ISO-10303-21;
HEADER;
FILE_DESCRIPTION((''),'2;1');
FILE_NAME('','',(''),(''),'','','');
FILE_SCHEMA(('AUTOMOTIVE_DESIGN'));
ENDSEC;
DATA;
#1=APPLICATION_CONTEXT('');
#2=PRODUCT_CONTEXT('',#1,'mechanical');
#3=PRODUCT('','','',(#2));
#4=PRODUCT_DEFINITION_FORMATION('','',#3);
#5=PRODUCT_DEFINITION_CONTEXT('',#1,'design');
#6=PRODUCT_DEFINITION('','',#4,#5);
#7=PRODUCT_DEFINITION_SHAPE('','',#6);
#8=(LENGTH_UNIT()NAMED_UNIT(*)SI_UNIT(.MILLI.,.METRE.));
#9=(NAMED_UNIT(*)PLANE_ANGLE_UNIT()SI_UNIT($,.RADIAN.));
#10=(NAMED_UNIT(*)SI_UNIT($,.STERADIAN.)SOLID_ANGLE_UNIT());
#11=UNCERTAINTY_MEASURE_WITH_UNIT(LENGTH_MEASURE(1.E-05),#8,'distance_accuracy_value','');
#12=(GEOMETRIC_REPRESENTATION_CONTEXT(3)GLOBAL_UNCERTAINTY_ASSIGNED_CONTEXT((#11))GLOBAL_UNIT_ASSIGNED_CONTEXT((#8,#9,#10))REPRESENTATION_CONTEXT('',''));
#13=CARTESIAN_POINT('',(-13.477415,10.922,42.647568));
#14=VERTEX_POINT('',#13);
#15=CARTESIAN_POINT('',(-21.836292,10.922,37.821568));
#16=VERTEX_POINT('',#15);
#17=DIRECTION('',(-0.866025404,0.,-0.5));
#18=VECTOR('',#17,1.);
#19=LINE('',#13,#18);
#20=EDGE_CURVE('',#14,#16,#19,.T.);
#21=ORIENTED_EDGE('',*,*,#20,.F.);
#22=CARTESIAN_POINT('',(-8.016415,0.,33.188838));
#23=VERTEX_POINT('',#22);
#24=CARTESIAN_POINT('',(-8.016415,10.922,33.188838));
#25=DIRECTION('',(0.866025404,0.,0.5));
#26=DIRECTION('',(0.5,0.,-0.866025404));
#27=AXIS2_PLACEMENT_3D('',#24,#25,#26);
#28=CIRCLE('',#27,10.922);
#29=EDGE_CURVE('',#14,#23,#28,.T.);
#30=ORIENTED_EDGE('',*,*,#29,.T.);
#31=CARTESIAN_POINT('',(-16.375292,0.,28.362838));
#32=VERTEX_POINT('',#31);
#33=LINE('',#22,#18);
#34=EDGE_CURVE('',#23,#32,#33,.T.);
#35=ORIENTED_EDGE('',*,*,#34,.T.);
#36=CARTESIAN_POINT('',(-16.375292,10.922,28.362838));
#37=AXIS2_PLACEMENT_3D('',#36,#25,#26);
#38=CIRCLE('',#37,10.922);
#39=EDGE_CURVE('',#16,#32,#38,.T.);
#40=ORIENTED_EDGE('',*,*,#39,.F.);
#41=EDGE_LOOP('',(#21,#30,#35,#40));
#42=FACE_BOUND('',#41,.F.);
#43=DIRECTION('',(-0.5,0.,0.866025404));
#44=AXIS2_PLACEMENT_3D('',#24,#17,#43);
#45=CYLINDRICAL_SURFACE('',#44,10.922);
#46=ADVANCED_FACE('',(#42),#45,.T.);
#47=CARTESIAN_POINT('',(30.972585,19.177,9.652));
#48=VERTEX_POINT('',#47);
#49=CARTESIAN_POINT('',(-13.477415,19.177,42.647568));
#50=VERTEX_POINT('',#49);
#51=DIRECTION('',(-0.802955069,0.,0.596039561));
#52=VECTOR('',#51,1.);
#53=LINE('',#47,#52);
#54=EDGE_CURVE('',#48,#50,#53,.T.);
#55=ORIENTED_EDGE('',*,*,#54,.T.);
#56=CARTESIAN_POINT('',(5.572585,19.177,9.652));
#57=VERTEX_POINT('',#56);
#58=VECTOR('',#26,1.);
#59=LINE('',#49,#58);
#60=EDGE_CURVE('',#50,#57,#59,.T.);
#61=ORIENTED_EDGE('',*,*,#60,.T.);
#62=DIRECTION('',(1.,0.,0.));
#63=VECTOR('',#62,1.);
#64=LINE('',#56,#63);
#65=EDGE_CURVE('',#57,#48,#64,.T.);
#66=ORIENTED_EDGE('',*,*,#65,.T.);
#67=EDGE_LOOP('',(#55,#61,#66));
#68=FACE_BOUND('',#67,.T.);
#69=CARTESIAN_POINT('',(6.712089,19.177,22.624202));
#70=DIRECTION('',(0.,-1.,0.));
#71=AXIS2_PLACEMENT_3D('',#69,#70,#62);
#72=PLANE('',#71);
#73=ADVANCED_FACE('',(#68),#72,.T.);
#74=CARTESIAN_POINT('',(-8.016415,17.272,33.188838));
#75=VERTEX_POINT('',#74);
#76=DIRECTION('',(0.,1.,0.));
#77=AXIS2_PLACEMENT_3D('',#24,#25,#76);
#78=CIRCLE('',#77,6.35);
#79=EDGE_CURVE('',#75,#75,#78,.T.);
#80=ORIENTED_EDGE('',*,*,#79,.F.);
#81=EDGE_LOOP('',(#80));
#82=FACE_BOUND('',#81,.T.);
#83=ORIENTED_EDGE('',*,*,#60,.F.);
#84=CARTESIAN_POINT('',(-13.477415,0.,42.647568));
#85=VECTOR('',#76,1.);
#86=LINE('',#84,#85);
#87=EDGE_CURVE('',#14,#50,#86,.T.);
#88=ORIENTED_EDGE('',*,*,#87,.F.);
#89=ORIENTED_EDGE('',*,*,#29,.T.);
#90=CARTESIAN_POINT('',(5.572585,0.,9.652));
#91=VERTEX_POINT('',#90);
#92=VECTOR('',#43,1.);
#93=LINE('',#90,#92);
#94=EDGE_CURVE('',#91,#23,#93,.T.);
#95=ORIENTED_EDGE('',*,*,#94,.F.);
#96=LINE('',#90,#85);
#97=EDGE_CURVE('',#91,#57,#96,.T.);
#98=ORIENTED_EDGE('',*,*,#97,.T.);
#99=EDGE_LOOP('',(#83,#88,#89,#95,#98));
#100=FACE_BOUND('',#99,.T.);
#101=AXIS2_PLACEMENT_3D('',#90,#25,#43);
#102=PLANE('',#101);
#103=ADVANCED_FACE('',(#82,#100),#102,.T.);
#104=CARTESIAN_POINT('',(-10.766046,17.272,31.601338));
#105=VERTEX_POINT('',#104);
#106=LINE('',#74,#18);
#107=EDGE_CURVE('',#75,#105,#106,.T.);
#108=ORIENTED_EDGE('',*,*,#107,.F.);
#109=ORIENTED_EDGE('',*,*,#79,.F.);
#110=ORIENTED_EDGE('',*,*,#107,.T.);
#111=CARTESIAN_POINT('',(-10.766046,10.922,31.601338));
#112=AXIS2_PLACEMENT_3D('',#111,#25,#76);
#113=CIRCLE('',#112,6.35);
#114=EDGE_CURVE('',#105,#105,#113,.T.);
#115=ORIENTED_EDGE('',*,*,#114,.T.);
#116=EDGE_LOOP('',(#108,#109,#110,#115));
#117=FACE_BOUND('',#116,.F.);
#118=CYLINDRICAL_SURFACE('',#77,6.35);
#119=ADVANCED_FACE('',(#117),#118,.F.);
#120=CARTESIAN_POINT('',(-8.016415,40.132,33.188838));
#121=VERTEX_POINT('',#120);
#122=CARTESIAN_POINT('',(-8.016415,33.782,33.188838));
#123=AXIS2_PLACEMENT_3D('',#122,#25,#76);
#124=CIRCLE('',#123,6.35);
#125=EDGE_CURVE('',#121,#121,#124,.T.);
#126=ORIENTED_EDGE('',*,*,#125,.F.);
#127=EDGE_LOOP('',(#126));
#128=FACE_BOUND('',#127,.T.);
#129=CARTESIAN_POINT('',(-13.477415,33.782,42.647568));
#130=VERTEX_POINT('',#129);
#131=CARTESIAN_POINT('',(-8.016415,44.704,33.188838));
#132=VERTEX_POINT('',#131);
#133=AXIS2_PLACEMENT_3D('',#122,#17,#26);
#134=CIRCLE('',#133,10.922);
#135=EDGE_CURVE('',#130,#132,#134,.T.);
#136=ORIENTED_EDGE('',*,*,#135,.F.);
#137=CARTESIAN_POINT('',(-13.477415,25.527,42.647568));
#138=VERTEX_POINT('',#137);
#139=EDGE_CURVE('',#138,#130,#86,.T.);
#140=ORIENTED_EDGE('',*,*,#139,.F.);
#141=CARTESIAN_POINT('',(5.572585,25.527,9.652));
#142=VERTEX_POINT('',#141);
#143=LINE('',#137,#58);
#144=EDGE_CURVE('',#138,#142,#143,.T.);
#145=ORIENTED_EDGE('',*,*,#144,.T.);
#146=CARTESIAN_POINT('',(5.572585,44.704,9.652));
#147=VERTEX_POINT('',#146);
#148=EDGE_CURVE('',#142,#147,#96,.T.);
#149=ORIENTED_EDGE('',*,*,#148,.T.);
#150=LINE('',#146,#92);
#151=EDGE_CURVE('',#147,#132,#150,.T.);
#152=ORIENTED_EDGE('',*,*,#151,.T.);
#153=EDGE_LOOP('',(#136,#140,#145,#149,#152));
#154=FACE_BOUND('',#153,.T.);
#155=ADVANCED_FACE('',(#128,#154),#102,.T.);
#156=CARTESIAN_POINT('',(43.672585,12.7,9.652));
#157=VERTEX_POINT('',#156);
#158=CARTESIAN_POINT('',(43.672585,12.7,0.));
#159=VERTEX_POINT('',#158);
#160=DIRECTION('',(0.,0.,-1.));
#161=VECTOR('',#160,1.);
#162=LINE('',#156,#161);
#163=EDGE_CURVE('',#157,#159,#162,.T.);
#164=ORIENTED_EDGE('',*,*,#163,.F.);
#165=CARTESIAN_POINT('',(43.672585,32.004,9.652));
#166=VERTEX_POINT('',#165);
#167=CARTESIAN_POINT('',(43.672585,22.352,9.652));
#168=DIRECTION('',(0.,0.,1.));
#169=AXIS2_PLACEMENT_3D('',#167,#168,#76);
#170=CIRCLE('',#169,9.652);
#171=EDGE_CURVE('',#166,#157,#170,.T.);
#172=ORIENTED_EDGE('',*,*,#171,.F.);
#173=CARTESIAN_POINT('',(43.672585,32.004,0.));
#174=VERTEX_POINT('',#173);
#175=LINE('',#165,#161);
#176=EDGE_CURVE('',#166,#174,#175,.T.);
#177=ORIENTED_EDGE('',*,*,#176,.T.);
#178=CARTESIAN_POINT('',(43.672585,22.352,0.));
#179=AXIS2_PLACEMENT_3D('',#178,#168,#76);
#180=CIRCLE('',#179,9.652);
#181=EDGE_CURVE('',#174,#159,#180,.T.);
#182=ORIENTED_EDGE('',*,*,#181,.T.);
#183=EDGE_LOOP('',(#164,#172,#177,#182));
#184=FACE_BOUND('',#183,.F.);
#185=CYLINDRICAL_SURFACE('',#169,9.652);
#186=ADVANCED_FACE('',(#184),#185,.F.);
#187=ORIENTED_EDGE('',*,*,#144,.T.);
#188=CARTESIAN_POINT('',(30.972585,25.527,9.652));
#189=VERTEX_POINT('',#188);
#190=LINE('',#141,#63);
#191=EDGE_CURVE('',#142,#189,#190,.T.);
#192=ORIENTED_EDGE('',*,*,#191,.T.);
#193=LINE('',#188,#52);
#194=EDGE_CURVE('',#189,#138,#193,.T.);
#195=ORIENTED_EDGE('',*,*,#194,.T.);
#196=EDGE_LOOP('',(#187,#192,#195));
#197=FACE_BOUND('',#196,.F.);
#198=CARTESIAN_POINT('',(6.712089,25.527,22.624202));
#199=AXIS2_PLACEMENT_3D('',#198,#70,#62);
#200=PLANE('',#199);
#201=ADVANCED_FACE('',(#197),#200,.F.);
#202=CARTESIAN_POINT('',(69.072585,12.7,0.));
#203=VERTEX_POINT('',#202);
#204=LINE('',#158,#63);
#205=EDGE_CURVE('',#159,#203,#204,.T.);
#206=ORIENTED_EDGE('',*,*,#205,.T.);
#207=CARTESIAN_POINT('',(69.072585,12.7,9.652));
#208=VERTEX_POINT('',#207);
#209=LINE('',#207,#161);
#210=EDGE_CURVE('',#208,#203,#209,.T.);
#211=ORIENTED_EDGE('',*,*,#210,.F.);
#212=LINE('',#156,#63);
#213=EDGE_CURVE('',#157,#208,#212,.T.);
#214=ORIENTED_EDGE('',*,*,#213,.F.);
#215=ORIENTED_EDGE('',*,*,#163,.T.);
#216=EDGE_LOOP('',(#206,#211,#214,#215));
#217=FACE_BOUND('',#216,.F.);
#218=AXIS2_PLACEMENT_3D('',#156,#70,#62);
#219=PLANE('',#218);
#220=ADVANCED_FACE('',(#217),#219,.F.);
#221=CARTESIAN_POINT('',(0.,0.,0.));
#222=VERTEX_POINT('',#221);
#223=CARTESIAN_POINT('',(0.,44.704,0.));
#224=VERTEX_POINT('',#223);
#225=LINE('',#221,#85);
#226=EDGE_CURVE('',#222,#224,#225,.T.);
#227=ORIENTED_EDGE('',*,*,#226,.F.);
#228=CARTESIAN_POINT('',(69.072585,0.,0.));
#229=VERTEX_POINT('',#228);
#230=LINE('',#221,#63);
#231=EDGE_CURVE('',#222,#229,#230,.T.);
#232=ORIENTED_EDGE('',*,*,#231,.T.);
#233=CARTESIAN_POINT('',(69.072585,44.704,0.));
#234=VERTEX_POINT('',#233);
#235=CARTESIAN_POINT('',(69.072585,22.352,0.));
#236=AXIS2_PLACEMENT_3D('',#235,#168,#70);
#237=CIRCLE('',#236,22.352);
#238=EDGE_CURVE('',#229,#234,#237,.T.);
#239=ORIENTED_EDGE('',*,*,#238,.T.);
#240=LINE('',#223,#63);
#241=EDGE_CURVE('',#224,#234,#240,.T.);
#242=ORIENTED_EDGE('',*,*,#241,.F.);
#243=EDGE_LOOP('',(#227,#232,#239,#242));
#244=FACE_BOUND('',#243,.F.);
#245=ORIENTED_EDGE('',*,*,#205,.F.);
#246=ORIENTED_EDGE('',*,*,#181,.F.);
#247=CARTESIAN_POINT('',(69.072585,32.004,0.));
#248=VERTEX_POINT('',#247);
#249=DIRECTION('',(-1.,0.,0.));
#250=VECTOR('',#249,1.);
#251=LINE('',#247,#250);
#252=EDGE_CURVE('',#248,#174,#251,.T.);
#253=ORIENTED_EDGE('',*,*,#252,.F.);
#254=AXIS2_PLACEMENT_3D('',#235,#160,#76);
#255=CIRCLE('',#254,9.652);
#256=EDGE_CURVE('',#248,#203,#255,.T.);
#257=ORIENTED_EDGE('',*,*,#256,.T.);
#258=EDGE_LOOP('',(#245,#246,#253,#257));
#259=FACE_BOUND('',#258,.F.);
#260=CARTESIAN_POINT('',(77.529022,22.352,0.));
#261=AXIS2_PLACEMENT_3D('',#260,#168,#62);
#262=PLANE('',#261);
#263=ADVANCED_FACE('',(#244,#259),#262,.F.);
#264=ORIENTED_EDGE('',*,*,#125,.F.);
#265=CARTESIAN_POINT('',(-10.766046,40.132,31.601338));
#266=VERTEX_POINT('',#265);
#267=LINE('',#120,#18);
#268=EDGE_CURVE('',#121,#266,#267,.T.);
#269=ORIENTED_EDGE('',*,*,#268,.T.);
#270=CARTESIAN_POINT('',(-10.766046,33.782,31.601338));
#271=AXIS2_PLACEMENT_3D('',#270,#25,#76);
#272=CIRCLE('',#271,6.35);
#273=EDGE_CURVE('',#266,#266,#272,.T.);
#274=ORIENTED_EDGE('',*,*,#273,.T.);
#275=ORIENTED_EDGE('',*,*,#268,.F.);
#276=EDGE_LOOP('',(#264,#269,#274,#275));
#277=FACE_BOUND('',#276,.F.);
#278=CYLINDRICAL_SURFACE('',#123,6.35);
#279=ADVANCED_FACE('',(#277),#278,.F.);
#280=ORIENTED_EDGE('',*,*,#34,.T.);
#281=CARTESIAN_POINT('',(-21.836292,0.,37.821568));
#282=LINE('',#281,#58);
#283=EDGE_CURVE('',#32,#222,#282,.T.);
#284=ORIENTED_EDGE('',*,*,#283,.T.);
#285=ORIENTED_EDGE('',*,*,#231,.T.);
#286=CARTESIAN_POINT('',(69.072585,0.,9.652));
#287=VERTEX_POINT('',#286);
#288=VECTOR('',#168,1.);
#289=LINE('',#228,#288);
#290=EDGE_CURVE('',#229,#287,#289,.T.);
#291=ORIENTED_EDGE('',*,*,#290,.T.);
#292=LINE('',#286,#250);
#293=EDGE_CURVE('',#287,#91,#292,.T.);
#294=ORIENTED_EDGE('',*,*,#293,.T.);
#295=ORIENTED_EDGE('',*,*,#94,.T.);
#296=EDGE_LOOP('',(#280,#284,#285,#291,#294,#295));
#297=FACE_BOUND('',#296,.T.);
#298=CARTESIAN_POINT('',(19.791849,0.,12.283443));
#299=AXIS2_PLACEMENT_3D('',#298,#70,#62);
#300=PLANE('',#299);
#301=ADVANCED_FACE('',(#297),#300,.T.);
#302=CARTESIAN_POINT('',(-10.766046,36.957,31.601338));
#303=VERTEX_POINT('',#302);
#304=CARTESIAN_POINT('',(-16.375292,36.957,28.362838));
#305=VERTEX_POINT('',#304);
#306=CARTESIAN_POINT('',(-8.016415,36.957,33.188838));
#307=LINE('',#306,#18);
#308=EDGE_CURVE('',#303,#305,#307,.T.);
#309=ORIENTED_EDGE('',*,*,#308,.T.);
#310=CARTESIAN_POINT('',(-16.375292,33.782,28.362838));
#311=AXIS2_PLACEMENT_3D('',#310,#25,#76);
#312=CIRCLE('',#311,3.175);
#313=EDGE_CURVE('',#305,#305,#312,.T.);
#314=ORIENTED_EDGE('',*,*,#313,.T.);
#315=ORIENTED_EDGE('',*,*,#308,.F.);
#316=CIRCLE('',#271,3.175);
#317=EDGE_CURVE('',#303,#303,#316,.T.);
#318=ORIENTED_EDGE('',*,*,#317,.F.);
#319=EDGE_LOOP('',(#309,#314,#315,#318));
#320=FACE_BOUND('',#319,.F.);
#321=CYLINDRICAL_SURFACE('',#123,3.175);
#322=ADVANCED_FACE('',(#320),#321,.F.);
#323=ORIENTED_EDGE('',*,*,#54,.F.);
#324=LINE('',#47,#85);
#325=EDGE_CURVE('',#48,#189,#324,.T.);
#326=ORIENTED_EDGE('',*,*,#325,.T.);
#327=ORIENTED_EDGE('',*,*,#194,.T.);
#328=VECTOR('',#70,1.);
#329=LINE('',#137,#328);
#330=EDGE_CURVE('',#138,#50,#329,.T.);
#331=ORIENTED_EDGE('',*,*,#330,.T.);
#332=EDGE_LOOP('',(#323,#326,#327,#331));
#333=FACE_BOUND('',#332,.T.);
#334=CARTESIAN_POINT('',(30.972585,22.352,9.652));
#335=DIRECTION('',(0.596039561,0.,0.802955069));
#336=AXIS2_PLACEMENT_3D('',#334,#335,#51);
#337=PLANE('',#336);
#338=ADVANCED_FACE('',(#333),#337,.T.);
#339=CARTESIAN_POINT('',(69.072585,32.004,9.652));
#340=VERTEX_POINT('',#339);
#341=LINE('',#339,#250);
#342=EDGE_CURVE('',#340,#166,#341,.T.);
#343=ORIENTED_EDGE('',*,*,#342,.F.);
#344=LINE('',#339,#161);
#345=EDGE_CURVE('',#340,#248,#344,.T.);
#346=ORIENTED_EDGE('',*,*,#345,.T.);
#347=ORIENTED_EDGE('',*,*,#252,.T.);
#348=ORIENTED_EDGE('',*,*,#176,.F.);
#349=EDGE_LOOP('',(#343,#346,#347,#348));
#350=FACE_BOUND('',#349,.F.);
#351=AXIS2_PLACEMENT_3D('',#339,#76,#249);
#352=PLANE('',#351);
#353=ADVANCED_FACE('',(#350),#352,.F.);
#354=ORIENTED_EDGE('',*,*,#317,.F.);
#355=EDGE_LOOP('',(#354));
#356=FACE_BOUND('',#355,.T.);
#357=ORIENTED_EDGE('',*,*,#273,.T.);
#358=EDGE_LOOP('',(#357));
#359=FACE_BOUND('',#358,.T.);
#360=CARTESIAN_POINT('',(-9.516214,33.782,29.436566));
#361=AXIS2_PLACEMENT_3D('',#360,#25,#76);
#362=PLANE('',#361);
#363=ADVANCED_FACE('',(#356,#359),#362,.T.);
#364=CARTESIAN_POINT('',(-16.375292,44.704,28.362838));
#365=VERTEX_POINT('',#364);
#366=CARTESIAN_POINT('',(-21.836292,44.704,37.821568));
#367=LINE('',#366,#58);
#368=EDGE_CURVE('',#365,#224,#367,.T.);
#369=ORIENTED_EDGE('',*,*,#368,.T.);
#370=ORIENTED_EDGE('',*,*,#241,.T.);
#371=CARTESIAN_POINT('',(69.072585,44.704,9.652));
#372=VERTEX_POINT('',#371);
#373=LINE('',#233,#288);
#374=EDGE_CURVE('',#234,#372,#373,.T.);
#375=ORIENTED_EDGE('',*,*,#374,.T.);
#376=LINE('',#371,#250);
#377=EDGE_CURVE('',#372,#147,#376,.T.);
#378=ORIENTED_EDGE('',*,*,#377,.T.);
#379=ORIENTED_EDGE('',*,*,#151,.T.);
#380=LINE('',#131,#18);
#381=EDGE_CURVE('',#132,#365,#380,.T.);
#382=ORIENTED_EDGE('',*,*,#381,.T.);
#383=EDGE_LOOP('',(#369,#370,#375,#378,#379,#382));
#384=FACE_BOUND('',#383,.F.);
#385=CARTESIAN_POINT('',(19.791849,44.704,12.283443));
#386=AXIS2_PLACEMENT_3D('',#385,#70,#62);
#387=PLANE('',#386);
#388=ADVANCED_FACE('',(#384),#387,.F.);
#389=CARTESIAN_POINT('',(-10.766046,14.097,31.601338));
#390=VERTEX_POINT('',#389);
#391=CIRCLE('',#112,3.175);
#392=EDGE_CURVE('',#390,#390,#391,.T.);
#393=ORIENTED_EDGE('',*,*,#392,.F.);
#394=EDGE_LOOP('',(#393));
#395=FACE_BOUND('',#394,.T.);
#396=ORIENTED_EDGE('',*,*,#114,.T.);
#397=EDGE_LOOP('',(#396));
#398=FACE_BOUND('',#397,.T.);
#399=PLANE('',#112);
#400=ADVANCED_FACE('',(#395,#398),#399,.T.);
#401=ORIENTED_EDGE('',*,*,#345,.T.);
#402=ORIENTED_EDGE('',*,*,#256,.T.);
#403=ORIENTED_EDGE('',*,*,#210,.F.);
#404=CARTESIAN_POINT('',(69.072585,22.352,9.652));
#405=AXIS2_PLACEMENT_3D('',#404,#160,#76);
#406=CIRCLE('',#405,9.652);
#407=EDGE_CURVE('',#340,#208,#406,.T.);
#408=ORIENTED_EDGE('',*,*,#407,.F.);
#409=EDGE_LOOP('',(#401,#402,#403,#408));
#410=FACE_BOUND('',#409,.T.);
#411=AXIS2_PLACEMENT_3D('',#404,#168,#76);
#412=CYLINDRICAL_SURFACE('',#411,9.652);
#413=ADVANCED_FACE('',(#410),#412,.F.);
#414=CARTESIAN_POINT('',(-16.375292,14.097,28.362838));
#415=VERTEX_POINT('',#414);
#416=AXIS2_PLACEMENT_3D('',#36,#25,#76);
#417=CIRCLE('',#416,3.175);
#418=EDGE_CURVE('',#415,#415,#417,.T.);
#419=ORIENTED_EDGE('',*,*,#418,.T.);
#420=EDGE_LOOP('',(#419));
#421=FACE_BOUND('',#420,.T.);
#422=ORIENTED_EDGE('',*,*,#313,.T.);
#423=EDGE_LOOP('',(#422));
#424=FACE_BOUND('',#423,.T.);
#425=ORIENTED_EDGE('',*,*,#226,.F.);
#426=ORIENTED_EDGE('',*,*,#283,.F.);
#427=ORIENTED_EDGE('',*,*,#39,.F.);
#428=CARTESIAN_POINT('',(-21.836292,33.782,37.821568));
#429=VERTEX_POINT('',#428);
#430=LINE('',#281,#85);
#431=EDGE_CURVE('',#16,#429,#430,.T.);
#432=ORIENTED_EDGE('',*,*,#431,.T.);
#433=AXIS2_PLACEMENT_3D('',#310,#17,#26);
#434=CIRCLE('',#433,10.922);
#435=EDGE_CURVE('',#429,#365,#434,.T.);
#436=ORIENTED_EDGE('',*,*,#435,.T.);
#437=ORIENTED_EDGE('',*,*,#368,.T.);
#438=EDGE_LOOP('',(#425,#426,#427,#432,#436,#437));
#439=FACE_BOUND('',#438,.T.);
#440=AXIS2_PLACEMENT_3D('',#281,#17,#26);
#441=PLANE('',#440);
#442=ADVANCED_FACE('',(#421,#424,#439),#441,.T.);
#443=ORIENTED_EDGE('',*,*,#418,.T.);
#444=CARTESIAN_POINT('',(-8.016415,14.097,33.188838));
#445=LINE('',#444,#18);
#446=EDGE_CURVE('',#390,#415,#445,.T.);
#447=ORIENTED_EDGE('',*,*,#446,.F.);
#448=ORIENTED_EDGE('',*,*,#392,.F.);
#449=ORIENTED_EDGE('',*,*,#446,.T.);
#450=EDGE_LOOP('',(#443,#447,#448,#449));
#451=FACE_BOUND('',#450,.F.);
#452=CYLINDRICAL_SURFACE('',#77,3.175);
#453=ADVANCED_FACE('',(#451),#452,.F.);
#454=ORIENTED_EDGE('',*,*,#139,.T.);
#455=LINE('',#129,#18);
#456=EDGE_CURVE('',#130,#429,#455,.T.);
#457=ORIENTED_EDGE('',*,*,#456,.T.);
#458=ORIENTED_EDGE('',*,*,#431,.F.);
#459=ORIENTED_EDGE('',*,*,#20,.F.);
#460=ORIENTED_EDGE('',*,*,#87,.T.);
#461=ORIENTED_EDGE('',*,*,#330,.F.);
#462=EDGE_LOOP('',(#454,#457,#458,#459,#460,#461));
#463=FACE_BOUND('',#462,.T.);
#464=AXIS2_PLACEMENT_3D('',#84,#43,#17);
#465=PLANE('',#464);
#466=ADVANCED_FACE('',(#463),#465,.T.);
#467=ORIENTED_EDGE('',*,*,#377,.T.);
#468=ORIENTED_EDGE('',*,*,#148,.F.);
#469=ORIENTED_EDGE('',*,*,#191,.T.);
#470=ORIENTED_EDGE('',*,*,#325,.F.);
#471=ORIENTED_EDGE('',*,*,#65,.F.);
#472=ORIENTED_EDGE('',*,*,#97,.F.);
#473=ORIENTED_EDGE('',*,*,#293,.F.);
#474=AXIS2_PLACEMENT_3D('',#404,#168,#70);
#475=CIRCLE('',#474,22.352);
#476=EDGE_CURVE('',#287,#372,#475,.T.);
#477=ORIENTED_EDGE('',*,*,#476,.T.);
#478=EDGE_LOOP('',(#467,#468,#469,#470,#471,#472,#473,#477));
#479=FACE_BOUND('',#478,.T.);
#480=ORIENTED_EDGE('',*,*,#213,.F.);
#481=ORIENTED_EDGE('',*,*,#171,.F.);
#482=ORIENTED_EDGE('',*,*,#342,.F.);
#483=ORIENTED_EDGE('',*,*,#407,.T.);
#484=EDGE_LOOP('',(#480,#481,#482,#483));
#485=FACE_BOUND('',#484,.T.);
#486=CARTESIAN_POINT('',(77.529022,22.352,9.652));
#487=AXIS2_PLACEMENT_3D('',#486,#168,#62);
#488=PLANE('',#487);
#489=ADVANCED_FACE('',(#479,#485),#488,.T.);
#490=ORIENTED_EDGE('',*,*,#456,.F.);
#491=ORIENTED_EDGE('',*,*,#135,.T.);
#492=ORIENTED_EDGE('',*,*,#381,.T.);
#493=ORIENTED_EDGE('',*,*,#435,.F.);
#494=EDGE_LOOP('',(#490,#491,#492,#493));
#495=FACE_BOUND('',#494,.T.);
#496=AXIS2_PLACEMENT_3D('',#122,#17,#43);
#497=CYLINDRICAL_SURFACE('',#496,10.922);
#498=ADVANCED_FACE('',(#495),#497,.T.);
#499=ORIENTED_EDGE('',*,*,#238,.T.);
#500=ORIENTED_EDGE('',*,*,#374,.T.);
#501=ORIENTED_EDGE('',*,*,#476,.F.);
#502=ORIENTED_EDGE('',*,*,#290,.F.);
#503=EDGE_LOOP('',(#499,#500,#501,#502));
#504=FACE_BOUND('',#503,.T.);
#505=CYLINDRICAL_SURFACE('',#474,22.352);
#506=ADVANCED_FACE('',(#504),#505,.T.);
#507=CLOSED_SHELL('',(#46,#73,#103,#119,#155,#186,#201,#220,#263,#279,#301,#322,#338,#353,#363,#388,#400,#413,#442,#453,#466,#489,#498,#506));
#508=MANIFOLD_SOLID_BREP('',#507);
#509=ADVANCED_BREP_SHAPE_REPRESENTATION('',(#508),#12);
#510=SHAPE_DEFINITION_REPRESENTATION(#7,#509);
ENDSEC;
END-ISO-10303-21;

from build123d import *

# Parameters (mm, degrees)
F1_DEPTH  = 44.704
F3_DEPTH  = 9.652
F4_DEPTH  = 9.652
F8_DEPTH  = 3.175
F9_R      = 3.175
F10_DEPTH = 9.652
F9_R_2    = 6.35
F11_DEPTH = 3.175
F12_R     = 10.922


with BuildPart() as f1:
    # F0 (on Front) → F1 (new body)
    with BuildSketch(Plane.XZ):
        Polygon((-21.8362923991, 37.8215678842), (0, 0), (69.0725847982, 0), (69.0725847982, 9.652), (5.5725847982, 9.652), (-13.4774152018, 42.6475678842), align=None)
    extrude(amount=-F1_DEPTH)

    # F2 (on face) → F3 (join, through all)
    with BuildSketch(Plane.XY.offset(9.652)):
        with BuildLine():
            Line((69.0725847982, 12.7), (69.0725847982, 0))
            ThreePointArc((69.0725847982, 0), (91.4245847982, 22.352), (69.0725847982, 44.704))
            Line((69.0725847982, 44.704), (69.0725847982, 32.004))
            ThreePointArc((69.0725847982, 32.004), (78.7245847982, 22.352), (69.0725847982, 12.7))
        make_face()
    extrude(amount=-F3_DEPTH)

    # F2 (on face) → F4 (cut, through all)
    with BuildSketch(Plane.XY.offset(9.652)):
        with BuildLine():
            Line((43.6725847982, 12.7), (69.0725847982, 12.7))
            Line((69.0725847982, 12.7), (69.0725847982, 32.004))
            Line((69.0725847982, 32.004), (43.6725847982, 32.004))
            ThreePointArc((43.6725847982, 32.004), (34.0205847982, 22.352), (43.6725847982, 12.7))
        make_face()
    extrude(amount=-F4_DEPTH, mode=Mode.SUBTRACT)

    # F7 (on offset) → F8 (join, symmetric)
    with BuildSketch(Plane.XZ.offset(-22.352)):
        Polygon((30.9725847982, 9.652), (-13.4774152018, 42.6475678842), (5.5725847982, 9.652), align=None)
    extrude(amount=F8_DEPTH, both=True)

    # F9 (on face) → F10 (cut, through all)
    with BuildSketch(Plane(origin=(8.3588771973, 0, 4.826), x_dir=(0, 1, 0), z_dir=(0.8660254038, 0, 0.5))):
        with Locations((10.922, 32.7505847982)):
            Circle(F9_R)
        with BuildLine():
            ThreePointArc((30.607, 32.7505847982), (33.782, 29.5755847982), (36.957, 32.7505847982))
            Line((36.957, 32.7505847982), (33.782, 32.7505847982))
            Line((33.782, 32.7505847982), (30.607, 32.7505847982))
        make_face()
        with BuildLine():
            Line((33.782, 32.7505847982), (36.957, 32.7505847982))
            ThreePointArc((36.957, 32.7505847982), (33.782, 35.9255847982), (30.607, 32.7505847982))
            Line((30.607, 32.7505847982), (33.782, 32.7505847982))
        make_face()
    extrude(amount=-F10_DEPTH, mode=Mode.SUBTRACT)

    # F9 (on face) → F11 (cut)
    with BuildSketch(Plane(origin=(8.3588771973, 0, 4.826), x_dir=(0, 1, 0), z_dir=(0.8660254038, 0, 0.5))):
        with Locations((10.922, 32.7505847982)):
            Circle(F9_R_2)
        with Locations((10.922, 32.7505847982)):
            Circle(F9_R, mode=Mode.SUBTRACT)
        with BuildLine():
            ThreePointArc((27.432, 32.7505847982), (33.782, 26.4005847982), (40.132, 32.7505847982))
            Line((40.132, 32.7505847982), (36.957, 32.7505847982))
            ThreePointArc((36.957, 32.7505847982), (33.782, 29.5755847982), (30.607, 32.7505847982))
            Line((30.607, 32.7505847982), (27.432, 32.7505847982))
        make_face()
        with BuildLine():
            Line((36.957, 32.7505847982), (40.132, 32.7505847982))
            ThreePointArc((40.132, 32.7505847982), (33.782, 39.1005847982), (27.432, 32.7505847982))
            Line((27.432, 32.7505847982), (30.607, 32.7505847982))
            ThreePointArc((30.607, 32.7505847982), (33.782, 35.9255847982), (36.957, 32.7505847982))
        make_face()
    extrude(amount=-F11_DEPTH, mode=Mode.SUBTRACT)

    # F12
    f12_edges = [f1.edges().sort_by_distance(p)[0] for p in [
        (-17.656854, 0, 40.234568),
        (-17.656854, 44.704, 40.234568),
    ]]
    fillet(f12_edges, radius=F12_R)


solid = f1.part
